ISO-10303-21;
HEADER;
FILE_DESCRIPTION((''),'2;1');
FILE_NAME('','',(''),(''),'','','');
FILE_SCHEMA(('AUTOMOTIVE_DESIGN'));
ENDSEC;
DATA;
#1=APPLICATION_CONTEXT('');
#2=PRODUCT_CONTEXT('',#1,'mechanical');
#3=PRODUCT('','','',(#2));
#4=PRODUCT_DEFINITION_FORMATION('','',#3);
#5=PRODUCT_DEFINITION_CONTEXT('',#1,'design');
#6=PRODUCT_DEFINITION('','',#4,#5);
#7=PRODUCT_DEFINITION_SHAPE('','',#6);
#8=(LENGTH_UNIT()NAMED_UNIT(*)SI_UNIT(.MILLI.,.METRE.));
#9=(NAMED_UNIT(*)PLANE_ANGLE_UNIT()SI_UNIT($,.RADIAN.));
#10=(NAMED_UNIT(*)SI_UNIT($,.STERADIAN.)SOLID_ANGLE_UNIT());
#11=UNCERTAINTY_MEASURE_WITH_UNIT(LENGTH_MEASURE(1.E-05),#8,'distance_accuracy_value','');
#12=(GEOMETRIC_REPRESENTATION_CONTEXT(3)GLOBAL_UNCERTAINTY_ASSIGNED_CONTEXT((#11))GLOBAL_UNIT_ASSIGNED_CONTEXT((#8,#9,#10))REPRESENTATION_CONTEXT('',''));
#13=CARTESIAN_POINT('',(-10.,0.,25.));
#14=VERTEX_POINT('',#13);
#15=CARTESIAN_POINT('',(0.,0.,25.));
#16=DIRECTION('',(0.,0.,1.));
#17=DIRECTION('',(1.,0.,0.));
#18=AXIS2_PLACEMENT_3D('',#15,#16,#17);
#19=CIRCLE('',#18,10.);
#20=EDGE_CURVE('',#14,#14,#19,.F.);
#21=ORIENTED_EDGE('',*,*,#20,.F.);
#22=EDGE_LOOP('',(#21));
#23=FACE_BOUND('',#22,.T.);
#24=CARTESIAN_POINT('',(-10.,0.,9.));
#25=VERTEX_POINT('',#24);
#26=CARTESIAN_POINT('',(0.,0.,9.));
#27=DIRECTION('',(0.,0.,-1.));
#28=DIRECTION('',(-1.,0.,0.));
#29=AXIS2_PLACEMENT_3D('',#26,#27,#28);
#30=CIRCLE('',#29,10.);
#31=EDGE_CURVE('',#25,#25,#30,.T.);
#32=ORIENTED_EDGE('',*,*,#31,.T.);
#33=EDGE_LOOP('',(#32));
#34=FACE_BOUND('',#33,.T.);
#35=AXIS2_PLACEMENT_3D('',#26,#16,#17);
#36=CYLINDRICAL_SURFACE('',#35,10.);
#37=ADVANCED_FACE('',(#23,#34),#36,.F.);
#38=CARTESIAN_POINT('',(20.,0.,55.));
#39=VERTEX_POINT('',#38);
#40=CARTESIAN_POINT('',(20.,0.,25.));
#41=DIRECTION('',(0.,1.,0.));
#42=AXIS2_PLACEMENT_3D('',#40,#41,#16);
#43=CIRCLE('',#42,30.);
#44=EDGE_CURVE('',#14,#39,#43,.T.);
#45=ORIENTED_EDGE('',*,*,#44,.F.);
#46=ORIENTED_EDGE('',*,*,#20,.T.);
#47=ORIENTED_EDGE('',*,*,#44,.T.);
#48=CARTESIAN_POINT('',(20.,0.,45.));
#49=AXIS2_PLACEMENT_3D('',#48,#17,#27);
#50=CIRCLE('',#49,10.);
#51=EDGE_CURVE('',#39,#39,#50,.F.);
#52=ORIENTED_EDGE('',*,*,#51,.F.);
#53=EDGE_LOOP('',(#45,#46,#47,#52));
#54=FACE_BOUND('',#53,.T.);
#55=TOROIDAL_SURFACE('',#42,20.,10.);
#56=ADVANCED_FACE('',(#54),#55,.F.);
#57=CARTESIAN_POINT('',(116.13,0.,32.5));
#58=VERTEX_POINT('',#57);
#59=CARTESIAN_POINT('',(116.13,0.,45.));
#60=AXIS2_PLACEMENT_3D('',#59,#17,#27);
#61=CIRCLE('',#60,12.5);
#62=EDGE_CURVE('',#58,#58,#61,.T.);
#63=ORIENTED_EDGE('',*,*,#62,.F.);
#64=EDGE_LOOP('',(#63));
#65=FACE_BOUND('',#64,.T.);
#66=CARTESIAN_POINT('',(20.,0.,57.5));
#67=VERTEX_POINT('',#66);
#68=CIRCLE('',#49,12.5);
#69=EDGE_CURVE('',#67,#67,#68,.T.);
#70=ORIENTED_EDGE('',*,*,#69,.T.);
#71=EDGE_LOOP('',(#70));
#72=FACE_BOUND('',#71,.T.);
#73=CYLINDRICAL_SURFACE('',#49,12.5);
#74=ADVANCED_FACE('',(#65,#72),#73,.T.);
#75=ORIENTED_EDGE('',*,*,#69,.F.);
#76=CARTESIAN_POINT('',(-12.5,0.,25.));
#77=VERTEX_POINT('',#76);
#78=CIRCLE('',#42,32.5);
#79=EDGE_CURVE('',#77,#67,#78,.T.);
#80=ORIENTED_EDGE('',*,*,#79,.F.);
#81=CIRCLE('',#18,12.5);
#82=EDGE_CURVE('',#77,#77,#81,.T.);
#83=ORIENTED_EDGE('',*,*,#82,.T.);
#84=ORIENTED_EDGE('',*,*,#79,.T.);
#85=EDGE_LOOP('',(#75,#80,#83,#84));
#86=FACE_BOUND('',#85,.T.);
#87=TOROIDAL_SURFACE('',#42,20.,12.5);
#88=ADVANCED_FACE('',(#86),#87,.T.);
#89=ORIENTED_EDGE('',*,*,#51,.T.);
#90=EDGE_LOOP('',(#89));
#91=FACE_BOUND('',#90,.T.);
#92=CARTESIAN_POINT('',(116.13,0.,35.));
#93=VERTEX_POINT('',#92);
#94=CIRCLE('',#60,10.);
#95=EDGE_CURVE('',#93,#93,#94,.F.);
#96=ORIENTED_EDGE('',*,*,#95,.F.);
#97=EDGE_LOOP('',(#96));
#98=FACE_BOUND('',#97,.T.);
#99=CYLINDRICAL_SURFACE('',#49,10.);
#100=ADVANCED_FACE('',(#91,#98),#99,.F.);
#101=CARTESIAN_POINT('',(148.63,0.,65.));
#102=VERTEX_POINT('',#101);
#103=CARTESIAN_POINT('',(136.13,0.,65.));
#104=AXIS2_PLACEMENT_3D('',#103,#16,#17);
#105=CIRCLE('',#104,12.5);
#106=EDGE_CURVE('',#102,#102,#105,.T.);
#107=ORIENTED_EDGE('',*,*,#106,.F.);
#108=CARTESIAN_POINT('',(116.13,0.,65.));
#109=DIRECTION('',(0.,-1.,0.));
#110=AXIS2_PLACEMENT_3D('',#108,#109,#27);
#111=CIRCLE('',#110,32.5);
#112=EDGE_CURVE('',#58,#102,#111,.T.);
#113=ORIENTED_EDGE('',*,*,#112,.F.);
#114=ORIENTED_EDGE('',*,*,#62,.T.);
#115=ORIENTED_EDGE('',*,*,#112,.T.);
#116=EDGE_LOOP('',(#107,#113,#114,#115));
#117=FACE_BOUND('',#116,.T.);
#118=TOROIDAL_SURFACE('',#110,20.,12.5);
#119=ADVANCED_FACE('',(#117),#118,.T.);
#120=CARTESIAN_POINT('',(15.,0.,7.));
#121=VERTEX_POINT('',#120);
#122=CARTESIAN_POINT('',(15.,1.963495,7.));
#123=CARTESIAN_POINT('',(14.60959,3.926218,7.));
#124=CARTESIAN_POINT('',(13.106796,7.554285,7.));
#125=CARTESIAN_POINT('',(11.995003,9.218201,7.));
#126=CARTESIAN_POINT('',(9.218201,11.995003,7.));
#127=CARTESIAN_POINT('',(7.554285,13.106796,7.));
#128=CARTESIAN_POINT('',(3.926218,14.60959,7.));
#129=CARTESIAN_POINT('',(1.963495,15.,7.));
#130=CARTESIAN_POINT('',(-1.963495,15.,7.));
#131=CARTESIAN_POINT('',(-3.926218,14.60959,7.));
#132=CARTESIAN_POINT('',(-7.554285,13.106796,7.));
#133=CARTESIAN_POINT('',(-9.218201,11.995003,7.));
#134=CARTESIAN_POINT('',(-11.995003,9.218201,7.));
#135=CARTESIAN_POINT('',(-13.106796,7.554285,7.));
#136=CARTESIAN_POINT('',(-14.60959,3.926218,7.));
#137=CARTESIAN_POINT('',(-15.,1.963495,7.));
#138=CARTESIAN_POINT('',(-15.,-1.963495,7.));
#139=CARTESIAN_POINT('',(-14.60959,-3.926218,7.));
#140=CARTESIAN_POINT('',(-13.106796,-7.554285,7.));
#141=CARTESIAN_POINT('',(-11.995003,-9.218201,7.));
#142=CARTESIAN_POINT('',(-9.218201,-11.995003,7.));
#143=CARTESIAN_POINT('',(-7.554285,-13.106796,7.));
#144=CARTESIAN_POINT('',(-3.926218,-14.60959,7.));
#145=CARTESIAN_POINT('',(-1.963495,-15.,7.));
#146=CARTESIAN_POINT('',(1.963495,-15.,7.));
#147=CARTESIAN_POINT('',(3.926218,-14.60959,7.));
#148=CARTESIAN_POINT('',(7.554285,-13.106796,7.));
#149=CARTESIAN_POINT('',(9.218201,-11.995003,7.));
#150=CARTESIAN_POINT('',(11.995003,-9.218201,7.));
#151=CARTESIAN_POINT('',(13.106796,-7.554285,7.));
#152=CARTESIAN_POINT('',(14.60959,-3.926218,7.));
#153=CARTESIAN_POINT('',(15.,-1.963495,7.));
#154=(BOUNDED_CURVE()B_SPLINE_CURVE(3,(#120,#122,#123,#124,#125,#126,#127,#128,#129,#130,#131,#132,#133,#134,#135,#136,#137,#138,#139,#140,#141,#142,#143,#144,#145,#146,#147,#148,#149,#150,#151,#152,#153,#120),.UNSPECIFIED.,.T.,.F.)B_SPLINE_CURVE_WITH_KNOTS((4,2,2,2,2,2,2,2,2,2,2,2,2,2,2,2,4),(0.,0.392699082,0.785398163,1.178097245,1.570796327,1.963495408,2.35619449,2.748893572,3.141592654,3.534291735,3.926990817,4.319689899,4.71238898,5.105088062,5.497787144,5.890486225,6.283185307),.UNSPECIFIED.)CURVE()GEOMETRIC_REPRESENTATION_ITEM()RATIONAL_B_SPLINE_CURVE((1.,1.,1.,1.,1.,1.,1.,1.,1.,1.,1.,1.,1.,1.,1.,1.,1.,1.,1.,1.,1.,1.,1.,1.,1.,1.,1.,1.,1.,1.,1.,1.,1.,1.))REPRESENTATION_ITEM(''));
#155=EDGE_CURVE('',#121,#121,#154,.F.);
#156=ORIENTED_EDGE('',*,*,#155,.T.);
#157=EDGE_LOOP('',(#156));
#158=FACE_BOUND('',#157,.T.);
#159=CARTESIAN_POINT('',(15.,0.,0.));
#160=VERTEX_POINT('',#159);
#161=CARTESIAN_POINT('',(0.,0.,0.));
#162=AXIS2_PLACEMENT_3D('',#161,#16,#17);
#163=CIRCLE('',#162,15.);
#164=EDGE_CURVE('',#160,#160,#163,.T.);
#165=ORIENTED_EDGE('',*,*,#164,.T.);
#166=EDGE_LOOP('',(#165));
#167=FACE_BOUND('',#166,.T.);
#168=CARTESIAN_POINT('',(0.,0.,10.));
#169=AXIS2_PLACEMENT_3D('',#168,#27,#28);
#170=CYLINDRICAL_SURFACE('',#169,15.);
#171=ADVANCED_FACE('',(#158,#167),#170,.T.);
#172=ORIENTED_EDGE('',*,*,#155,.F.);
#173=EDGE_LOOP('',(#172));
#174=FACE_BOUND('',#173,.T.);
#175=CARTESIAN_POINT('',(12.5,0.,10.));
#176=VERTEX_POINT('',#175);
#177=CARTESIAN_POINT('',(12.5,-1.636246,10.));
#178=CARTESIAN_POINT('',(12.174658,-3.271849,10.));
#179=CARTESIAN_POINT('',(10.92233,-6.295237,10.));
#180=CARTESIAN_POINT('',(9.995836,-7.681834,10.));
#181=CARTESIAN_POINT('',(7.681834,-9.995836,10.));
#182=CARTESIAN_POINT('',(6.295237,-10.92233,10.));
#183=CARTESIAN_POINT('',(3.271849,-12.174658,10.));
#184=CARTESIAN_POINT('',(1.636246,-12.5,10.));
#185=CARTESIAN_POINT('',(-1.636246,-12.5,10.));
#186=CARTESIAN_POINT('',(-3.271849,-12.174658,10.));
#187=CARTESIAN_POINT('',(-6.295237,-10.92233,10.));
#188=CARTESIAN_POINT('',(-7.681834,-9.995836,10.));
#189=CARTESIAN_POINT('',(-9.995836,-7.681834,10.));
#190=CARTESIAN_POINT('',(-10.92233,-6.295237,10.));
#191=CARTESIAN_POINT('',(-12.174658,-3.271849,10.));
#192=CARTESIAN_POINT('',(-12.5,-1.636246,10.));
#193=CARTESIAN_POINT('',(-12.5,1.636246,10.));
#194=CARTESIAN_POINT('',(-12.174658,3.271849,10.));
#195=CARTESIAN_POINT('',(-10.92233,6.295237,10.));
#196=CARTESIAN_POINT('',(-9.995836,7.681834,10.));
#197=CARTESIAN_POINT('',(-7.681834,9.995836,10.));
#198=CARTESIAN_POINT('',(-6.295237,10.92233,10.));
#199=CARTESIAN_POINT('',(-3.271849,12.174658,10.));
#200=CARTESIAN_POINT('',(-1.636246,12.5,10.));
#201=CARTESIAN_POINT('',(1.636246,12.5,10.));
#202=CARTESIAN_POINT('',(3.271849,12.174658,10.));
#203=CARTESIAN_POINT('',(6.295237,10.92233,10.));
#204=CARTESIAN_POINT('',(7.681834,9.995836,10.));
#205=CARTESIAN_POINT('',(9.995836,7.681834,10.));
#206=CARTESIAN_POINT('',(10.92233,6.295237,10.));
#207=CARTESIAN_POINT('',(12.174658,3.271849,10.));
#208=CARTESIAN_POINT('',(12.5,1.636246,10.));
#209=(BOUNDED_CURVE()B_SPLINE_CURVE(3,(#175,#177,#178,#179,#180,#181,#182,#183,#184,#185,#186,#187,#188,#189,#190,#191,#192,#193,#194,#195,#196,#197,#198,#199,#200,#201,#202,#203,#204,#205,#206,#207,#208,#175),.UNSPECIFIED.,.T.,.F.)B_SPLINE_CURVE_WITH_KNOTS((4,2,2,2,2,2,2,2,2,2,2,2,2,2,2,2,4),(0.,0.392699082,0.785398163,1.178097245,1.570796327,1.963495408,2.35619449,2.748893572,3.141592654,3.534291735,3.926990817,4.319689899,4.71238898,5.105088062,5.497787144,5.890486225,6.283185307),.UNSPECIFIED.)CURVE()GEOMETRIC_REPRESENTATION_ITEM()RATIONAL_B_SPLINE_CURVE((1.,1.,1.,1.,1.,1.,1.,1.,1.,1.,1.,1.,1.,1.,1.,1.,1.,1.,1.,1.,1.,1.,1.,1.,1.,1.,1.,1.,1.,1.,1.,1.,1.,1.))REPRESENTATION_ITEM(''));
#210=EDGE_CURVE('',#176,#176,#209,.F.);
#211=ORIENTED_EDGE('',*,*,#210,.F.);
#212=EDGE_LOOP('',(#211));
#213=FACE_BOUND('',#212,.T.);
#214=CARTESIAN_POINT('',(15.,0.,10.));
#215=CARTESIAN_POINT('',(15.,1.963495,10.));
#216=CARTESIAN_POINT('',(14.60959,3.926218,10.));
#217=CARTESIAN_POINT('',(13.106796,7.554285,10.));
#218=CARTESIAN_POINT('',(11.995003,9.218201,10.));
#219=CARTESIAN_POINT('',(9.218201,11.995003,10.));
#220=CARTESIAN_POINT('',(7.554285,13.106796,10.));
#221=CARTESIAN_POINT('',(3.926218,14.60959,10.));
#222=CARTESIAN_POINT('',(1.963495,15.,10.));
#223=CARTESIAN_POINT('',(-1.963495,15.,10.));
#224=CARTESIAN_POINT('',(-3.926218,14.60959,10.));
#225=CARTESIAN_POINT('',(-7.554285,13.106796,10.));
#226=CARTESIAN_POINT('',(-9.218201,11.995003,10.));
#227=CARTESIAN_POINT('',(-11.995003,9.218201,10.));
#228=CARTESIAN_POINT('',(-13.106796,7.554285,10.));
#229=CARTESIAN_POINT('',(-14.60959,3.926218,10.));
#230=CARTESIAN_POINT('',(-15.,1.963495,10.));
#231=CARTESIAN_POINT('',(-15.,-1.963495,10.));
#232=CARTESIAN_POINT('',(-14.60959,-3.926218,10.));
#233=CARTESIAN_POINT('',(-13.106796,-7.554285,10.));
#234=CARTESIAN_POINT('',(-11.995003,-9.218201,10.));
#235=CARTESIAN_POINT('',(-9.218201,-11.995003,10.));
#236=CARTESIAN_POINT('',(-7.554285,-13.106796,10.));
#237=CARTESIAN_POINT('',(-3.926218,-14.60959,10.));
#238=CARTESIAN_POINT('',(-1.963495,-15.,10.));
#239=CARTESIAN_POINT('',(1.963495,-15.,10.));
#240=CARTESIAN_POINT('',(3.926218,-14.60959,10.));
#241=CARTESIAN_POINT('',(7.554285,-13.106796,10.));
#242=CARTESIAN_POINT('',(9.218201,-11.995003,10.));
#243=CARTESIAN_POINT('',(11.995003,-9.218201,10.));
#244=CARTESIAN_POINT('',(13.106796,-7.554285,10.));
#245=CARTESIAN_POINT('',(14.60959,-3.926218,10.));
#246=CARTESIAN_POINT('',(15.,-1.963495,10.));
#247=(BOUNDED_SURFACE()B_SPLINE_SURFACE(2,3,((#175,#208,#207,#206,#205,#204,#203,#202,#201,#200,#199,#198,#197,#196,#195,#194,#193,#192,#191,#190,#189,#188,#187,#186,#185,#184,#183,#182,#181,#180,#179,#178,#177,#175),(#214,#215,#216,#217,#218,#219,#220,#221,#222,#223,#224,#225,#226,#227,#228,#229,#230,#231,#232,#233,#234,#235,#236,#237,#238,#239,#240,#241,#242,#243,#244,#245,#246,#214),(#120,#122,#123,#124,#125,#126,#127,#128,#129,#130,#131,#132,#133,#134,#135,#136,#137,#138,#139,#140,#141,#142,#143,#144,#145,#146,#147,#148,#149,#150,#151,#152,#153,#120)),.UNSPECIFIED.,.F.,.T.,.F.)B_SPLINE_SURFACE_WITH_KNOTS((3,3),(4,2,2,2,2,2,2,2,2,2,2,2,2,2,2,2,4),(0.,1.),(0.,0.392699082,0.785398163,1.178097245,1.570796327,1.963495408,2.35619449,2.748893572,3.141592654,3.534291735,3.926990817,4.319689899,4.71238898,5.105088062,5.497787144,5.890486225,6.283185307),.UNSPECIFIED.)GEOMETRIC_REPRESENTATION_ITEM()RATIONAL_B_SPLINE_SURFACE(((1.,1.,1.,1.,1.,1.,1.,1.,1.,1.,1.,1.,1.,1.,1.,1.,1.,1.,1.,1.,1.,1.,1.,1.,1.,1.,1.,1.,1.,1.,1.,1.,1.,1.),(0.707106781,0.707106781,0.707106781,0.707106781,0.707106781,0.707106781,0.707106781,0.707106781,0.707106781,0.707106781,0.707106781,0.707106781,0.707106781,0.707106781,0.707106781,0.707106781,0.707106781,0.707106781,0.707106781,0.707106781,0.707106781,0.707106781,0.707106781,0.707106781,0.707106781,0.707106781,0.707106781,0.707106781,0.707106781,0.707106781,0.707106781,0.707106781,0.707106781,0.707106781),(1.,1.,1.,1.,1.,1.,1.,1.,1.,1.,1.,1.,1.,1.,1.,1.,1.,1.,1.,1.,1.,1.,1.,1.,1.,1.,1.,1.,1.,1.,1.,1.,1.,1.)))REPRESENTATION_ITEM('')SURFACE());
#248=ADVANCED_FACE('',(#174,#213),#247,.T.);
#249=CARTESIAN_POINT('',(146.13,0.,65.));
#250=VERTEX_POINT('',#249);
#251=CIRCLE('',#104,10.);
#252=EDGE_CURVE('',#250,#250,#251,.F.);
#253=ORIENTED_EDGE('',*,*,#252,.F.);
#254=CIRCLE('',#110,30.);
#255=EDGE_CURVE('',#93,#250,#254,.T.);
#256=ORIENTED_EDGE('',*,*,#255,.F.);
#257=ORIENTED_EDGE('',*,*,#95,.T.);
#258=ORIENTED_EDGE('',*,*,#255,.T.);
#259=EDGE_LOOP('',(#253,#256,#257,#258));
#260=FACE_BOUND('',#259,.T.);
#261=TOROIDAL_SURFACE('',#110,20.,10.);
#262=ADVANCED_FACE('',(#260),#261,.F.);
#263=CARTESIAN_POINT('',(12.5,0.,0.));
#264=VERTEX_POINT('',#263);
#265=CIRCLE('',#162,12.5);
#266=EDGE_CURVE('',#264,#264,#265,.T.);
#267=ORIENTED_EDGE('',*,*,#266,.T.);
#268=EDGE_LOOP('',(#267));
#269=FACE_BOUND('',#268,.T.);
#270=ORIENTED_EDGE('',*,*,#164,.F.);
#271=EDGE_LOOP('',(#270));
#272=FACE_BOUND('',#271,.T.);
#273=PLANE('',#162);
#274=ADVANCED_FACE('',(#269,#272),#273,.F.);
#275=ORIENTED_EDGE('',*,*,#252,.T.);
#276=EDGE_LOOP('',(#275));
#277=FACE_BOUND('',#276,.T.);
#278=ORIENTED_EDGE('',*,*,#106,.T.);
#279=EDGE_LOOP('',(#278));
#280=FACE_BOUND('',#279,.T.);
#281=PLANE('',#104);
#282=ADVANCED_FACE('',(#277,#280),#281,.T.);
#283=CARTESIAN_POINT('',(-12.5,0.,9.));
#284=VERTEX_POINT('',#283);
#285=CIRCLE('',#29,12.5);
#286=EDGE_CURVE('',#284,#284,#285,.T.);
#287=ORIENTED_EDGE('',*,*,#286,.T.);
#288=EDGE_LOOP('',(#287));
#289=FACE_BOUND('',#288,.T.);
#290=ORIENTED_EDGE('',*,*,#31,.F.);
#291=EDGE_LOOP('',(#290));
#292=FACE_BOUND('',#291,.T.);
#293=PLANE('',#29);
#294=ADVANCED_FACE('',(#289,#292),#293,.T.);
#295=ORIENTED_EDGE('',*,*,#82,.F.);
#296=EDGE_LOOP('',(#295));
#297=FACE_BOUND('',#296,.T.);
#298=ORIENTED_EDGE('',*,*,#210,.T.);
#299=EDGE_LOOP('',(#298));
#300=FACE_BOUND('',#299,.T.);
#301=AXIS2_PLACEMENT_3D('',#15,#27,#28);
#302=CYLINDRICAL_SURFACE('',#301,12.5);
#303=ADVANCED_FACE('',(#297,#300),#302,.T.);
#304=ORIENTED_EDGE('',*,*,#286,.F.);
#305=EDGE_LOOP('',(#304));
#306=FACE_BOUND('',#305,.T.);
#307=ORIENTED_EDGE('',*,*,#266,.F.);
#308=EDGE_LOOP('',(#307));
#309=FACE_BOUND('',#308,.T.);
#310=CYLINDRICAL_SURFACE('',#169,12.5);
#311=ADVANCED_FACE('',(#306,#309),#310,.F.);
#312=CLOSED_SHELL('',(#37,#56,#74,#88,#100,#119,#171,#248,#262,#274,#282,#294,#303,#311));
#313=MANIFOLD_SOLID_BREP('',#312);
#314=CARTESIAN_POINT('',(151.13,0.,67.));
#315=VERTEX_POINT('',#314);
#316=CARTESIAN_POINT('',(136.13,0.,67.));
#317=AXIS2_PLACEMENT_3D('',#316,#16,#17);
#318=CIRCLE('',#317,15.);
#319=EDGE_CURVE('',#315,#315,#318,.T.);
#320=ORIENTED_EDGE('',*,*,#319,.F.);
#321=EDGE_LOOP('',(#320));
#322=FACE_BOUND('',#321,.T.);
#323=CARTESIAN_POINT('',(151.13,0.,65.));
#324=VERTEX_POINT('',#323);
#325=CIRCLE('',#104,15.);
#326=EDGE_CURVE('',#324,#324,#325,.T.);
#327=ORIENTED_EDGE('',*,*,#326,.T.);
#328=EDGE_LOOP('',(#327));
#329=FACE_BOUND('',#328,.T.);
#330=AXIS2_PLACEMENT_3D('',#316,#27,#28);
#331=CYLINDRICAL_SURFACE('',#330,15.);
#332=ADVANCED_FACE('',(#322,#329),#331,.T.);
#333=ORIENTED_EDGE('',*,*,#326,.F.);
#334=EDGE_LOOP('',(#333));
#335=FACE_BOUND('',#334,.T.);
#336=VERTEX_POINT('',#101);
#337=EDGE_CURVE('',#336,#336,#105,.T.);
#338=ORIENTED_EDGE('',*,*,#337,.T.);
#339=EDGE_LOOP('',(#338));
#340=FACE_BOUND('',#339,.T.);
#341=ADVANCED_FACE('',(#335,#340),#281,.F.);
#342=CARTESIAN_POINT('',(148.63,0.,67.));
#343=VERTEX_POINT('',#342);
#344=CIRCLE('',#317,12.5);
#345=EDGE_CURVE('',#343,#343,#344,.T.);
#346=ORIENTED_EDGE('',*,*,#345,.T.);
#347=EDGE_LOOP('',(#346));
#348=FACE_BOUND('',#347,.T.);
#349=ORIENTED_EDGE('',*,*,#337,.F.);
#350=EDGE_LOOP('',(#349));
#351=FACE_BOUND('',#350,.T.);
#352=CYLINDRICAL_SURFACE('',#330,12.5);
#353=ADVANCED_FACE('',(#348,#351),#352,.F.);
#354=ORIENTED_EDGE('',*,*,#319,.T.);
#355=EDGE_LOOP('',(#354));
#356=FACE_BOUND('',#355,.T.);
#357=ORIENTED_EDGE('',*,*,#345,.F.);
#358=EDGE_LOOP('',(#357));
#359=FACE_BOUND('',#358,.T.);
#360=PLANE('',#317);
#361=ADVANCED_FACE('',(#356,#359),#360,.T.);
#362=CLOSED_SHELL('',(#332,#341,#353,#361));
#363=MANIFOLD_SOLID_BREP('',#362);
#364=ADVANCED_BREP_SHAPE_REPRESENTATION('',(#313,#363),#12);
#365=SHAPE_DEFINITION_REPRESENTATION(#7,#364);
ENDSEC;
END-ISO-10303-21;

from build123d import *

# Parameters (mm, degrees)
CROQUIS1_R              = 15
CROQUIS1_R_2            = 12.5
SALIENTE_EXTRUIR1_DEPTH = 10
CROQUIS2_R              = 12.5
CROQUIS2_R_2            = 10
SALIENTE_EXTRUIR2_DEPTH = 15
REDONDEO3_SIZE          = 3
REDONDEO3_SIZE_2        = 2.5
SALIENTE_EXTRUIR3_START = 1
CROQUIS3_R              = 12.5
CROQUIS3_R_2            = 10
SALIENTE_EXTRUIR3_DEPTH = 1
CROQUIS6_R              = 12.5
CROQUIS6_R_2            = 10
CROQUIS7_R              = 15
CROQUIS7_R_2            = 12.5
SALIENTE_EXTRUIR4_DEPTH = 2


with BuildPart() as part:
    # Croquis1 → Saliente-Extruir1 (new body)
    with BuildSketch(Plane.XY):
        Circle(CROQUIS1_R)
        Circle(CROQUIS1_R_2, mode=Mode.SUBTRACT)
    extrude(amount=SALIENTE_EXTRUIR1_DEPTH)

    # Redondeo3
    # an asymmetric fillet: 3, 2.5 mm, written as the material it takes off along each edge
    with BuildSketch(Plane(origin=(0, 0, 10), x_dir=(1, 0, 0), z_dir=(0, -1, 0))) as redondeo3_piece_1:
        with BuildLine():
            Bezier((15, -REDONDEO3_SIZE), (15, 0), (15 - REDONDEO3_SIZE_2, 0), weights=[1, 0.707106781, 1])
            Line((15 - REDONDEO3_SIZE_2, 0), (15, 0))
            Line((15, 0), (15, -REDONDEO3_SIZE))
        make_face()
    revolve(axis=Axis((0, 0, 10), (0, 0, 1)), mode=Mode.SUBTRACT)



with BuildPart() as body_2:
    # Croquis2 → Saliente-Extruir2 (new body)
    with BuildSketch(Plane.XY.offset(10)):
        Circle(CROQUIS2_R)
        Circle(CROQUIS2_R_2, mode=Mode.SUBTRACT)
    extrude(amount=SALIENTE_EXTRUIR2_DEPTH)


with BuildPart() as part_1:
    add(part.part)

    add(body_2.part)  # Saliente-Extruir3 merges body 2
    # Croquis3 → Saliente-Extruir3 (add)
    with BuildSketch(Plane(origin=(0, 0, 10), x_dir=(-1, 0, 0), z_dir=(0, 0, -1)).offset(SALIENTE_EXTRUIR3_START)):
        Circle(CROQUIS3_R)
        with Locations(Location((0, 0, 0), (0, 0, 180))):
            Circle(CROQUIS3_R_2, mode=Mode.SUBTRACT)
    extrude(amount=-SALIENTE_EXTRUIR3_DEPTH)

    # Barrer1: sweep along a path in Croquis5
    with BuildLine(Plane(origin=(0, 0, 0), x_dir=(1, 0, 0), z_dir=(0, 1, 0))) as barrer1_path:
        ThreePointArc((0, -25), (5.857864376, -39.142135624), (20, -45))
        Line((20, -45), (116.13, -45))
        ThreePointArc((116.13, -45), (130.272135624, -50.857864376), (136.13, -65))
    # Croquis6 → Barrer1 (sweep)
    with BuildSketch(Plane.XY.offset(25)):
        Circle(CROQUIS6_R)
        Circle(CROQUIS6_R_2, mode=Mode.SUBTRACT)
    sweep(path=barrer1_path.line)


with BuildPart() as body_2_2:
    # Croquis7 → Saliente-Extruir4 (new body)
    with BuildSketch(Plane.XY.offset(65)):
        with Locations((136.13, 0)):
            Circle(CROQUIS7_R)
        with Locations((136.13, 0)):
            Circle(CROQUIS7_R_2, mode=Mode.SUBTRACT)
    extrude(amount=SALIENTE_EXTRUIR4_DEPTH)


solid = Compound([part_1.part, body_2_2.part])
